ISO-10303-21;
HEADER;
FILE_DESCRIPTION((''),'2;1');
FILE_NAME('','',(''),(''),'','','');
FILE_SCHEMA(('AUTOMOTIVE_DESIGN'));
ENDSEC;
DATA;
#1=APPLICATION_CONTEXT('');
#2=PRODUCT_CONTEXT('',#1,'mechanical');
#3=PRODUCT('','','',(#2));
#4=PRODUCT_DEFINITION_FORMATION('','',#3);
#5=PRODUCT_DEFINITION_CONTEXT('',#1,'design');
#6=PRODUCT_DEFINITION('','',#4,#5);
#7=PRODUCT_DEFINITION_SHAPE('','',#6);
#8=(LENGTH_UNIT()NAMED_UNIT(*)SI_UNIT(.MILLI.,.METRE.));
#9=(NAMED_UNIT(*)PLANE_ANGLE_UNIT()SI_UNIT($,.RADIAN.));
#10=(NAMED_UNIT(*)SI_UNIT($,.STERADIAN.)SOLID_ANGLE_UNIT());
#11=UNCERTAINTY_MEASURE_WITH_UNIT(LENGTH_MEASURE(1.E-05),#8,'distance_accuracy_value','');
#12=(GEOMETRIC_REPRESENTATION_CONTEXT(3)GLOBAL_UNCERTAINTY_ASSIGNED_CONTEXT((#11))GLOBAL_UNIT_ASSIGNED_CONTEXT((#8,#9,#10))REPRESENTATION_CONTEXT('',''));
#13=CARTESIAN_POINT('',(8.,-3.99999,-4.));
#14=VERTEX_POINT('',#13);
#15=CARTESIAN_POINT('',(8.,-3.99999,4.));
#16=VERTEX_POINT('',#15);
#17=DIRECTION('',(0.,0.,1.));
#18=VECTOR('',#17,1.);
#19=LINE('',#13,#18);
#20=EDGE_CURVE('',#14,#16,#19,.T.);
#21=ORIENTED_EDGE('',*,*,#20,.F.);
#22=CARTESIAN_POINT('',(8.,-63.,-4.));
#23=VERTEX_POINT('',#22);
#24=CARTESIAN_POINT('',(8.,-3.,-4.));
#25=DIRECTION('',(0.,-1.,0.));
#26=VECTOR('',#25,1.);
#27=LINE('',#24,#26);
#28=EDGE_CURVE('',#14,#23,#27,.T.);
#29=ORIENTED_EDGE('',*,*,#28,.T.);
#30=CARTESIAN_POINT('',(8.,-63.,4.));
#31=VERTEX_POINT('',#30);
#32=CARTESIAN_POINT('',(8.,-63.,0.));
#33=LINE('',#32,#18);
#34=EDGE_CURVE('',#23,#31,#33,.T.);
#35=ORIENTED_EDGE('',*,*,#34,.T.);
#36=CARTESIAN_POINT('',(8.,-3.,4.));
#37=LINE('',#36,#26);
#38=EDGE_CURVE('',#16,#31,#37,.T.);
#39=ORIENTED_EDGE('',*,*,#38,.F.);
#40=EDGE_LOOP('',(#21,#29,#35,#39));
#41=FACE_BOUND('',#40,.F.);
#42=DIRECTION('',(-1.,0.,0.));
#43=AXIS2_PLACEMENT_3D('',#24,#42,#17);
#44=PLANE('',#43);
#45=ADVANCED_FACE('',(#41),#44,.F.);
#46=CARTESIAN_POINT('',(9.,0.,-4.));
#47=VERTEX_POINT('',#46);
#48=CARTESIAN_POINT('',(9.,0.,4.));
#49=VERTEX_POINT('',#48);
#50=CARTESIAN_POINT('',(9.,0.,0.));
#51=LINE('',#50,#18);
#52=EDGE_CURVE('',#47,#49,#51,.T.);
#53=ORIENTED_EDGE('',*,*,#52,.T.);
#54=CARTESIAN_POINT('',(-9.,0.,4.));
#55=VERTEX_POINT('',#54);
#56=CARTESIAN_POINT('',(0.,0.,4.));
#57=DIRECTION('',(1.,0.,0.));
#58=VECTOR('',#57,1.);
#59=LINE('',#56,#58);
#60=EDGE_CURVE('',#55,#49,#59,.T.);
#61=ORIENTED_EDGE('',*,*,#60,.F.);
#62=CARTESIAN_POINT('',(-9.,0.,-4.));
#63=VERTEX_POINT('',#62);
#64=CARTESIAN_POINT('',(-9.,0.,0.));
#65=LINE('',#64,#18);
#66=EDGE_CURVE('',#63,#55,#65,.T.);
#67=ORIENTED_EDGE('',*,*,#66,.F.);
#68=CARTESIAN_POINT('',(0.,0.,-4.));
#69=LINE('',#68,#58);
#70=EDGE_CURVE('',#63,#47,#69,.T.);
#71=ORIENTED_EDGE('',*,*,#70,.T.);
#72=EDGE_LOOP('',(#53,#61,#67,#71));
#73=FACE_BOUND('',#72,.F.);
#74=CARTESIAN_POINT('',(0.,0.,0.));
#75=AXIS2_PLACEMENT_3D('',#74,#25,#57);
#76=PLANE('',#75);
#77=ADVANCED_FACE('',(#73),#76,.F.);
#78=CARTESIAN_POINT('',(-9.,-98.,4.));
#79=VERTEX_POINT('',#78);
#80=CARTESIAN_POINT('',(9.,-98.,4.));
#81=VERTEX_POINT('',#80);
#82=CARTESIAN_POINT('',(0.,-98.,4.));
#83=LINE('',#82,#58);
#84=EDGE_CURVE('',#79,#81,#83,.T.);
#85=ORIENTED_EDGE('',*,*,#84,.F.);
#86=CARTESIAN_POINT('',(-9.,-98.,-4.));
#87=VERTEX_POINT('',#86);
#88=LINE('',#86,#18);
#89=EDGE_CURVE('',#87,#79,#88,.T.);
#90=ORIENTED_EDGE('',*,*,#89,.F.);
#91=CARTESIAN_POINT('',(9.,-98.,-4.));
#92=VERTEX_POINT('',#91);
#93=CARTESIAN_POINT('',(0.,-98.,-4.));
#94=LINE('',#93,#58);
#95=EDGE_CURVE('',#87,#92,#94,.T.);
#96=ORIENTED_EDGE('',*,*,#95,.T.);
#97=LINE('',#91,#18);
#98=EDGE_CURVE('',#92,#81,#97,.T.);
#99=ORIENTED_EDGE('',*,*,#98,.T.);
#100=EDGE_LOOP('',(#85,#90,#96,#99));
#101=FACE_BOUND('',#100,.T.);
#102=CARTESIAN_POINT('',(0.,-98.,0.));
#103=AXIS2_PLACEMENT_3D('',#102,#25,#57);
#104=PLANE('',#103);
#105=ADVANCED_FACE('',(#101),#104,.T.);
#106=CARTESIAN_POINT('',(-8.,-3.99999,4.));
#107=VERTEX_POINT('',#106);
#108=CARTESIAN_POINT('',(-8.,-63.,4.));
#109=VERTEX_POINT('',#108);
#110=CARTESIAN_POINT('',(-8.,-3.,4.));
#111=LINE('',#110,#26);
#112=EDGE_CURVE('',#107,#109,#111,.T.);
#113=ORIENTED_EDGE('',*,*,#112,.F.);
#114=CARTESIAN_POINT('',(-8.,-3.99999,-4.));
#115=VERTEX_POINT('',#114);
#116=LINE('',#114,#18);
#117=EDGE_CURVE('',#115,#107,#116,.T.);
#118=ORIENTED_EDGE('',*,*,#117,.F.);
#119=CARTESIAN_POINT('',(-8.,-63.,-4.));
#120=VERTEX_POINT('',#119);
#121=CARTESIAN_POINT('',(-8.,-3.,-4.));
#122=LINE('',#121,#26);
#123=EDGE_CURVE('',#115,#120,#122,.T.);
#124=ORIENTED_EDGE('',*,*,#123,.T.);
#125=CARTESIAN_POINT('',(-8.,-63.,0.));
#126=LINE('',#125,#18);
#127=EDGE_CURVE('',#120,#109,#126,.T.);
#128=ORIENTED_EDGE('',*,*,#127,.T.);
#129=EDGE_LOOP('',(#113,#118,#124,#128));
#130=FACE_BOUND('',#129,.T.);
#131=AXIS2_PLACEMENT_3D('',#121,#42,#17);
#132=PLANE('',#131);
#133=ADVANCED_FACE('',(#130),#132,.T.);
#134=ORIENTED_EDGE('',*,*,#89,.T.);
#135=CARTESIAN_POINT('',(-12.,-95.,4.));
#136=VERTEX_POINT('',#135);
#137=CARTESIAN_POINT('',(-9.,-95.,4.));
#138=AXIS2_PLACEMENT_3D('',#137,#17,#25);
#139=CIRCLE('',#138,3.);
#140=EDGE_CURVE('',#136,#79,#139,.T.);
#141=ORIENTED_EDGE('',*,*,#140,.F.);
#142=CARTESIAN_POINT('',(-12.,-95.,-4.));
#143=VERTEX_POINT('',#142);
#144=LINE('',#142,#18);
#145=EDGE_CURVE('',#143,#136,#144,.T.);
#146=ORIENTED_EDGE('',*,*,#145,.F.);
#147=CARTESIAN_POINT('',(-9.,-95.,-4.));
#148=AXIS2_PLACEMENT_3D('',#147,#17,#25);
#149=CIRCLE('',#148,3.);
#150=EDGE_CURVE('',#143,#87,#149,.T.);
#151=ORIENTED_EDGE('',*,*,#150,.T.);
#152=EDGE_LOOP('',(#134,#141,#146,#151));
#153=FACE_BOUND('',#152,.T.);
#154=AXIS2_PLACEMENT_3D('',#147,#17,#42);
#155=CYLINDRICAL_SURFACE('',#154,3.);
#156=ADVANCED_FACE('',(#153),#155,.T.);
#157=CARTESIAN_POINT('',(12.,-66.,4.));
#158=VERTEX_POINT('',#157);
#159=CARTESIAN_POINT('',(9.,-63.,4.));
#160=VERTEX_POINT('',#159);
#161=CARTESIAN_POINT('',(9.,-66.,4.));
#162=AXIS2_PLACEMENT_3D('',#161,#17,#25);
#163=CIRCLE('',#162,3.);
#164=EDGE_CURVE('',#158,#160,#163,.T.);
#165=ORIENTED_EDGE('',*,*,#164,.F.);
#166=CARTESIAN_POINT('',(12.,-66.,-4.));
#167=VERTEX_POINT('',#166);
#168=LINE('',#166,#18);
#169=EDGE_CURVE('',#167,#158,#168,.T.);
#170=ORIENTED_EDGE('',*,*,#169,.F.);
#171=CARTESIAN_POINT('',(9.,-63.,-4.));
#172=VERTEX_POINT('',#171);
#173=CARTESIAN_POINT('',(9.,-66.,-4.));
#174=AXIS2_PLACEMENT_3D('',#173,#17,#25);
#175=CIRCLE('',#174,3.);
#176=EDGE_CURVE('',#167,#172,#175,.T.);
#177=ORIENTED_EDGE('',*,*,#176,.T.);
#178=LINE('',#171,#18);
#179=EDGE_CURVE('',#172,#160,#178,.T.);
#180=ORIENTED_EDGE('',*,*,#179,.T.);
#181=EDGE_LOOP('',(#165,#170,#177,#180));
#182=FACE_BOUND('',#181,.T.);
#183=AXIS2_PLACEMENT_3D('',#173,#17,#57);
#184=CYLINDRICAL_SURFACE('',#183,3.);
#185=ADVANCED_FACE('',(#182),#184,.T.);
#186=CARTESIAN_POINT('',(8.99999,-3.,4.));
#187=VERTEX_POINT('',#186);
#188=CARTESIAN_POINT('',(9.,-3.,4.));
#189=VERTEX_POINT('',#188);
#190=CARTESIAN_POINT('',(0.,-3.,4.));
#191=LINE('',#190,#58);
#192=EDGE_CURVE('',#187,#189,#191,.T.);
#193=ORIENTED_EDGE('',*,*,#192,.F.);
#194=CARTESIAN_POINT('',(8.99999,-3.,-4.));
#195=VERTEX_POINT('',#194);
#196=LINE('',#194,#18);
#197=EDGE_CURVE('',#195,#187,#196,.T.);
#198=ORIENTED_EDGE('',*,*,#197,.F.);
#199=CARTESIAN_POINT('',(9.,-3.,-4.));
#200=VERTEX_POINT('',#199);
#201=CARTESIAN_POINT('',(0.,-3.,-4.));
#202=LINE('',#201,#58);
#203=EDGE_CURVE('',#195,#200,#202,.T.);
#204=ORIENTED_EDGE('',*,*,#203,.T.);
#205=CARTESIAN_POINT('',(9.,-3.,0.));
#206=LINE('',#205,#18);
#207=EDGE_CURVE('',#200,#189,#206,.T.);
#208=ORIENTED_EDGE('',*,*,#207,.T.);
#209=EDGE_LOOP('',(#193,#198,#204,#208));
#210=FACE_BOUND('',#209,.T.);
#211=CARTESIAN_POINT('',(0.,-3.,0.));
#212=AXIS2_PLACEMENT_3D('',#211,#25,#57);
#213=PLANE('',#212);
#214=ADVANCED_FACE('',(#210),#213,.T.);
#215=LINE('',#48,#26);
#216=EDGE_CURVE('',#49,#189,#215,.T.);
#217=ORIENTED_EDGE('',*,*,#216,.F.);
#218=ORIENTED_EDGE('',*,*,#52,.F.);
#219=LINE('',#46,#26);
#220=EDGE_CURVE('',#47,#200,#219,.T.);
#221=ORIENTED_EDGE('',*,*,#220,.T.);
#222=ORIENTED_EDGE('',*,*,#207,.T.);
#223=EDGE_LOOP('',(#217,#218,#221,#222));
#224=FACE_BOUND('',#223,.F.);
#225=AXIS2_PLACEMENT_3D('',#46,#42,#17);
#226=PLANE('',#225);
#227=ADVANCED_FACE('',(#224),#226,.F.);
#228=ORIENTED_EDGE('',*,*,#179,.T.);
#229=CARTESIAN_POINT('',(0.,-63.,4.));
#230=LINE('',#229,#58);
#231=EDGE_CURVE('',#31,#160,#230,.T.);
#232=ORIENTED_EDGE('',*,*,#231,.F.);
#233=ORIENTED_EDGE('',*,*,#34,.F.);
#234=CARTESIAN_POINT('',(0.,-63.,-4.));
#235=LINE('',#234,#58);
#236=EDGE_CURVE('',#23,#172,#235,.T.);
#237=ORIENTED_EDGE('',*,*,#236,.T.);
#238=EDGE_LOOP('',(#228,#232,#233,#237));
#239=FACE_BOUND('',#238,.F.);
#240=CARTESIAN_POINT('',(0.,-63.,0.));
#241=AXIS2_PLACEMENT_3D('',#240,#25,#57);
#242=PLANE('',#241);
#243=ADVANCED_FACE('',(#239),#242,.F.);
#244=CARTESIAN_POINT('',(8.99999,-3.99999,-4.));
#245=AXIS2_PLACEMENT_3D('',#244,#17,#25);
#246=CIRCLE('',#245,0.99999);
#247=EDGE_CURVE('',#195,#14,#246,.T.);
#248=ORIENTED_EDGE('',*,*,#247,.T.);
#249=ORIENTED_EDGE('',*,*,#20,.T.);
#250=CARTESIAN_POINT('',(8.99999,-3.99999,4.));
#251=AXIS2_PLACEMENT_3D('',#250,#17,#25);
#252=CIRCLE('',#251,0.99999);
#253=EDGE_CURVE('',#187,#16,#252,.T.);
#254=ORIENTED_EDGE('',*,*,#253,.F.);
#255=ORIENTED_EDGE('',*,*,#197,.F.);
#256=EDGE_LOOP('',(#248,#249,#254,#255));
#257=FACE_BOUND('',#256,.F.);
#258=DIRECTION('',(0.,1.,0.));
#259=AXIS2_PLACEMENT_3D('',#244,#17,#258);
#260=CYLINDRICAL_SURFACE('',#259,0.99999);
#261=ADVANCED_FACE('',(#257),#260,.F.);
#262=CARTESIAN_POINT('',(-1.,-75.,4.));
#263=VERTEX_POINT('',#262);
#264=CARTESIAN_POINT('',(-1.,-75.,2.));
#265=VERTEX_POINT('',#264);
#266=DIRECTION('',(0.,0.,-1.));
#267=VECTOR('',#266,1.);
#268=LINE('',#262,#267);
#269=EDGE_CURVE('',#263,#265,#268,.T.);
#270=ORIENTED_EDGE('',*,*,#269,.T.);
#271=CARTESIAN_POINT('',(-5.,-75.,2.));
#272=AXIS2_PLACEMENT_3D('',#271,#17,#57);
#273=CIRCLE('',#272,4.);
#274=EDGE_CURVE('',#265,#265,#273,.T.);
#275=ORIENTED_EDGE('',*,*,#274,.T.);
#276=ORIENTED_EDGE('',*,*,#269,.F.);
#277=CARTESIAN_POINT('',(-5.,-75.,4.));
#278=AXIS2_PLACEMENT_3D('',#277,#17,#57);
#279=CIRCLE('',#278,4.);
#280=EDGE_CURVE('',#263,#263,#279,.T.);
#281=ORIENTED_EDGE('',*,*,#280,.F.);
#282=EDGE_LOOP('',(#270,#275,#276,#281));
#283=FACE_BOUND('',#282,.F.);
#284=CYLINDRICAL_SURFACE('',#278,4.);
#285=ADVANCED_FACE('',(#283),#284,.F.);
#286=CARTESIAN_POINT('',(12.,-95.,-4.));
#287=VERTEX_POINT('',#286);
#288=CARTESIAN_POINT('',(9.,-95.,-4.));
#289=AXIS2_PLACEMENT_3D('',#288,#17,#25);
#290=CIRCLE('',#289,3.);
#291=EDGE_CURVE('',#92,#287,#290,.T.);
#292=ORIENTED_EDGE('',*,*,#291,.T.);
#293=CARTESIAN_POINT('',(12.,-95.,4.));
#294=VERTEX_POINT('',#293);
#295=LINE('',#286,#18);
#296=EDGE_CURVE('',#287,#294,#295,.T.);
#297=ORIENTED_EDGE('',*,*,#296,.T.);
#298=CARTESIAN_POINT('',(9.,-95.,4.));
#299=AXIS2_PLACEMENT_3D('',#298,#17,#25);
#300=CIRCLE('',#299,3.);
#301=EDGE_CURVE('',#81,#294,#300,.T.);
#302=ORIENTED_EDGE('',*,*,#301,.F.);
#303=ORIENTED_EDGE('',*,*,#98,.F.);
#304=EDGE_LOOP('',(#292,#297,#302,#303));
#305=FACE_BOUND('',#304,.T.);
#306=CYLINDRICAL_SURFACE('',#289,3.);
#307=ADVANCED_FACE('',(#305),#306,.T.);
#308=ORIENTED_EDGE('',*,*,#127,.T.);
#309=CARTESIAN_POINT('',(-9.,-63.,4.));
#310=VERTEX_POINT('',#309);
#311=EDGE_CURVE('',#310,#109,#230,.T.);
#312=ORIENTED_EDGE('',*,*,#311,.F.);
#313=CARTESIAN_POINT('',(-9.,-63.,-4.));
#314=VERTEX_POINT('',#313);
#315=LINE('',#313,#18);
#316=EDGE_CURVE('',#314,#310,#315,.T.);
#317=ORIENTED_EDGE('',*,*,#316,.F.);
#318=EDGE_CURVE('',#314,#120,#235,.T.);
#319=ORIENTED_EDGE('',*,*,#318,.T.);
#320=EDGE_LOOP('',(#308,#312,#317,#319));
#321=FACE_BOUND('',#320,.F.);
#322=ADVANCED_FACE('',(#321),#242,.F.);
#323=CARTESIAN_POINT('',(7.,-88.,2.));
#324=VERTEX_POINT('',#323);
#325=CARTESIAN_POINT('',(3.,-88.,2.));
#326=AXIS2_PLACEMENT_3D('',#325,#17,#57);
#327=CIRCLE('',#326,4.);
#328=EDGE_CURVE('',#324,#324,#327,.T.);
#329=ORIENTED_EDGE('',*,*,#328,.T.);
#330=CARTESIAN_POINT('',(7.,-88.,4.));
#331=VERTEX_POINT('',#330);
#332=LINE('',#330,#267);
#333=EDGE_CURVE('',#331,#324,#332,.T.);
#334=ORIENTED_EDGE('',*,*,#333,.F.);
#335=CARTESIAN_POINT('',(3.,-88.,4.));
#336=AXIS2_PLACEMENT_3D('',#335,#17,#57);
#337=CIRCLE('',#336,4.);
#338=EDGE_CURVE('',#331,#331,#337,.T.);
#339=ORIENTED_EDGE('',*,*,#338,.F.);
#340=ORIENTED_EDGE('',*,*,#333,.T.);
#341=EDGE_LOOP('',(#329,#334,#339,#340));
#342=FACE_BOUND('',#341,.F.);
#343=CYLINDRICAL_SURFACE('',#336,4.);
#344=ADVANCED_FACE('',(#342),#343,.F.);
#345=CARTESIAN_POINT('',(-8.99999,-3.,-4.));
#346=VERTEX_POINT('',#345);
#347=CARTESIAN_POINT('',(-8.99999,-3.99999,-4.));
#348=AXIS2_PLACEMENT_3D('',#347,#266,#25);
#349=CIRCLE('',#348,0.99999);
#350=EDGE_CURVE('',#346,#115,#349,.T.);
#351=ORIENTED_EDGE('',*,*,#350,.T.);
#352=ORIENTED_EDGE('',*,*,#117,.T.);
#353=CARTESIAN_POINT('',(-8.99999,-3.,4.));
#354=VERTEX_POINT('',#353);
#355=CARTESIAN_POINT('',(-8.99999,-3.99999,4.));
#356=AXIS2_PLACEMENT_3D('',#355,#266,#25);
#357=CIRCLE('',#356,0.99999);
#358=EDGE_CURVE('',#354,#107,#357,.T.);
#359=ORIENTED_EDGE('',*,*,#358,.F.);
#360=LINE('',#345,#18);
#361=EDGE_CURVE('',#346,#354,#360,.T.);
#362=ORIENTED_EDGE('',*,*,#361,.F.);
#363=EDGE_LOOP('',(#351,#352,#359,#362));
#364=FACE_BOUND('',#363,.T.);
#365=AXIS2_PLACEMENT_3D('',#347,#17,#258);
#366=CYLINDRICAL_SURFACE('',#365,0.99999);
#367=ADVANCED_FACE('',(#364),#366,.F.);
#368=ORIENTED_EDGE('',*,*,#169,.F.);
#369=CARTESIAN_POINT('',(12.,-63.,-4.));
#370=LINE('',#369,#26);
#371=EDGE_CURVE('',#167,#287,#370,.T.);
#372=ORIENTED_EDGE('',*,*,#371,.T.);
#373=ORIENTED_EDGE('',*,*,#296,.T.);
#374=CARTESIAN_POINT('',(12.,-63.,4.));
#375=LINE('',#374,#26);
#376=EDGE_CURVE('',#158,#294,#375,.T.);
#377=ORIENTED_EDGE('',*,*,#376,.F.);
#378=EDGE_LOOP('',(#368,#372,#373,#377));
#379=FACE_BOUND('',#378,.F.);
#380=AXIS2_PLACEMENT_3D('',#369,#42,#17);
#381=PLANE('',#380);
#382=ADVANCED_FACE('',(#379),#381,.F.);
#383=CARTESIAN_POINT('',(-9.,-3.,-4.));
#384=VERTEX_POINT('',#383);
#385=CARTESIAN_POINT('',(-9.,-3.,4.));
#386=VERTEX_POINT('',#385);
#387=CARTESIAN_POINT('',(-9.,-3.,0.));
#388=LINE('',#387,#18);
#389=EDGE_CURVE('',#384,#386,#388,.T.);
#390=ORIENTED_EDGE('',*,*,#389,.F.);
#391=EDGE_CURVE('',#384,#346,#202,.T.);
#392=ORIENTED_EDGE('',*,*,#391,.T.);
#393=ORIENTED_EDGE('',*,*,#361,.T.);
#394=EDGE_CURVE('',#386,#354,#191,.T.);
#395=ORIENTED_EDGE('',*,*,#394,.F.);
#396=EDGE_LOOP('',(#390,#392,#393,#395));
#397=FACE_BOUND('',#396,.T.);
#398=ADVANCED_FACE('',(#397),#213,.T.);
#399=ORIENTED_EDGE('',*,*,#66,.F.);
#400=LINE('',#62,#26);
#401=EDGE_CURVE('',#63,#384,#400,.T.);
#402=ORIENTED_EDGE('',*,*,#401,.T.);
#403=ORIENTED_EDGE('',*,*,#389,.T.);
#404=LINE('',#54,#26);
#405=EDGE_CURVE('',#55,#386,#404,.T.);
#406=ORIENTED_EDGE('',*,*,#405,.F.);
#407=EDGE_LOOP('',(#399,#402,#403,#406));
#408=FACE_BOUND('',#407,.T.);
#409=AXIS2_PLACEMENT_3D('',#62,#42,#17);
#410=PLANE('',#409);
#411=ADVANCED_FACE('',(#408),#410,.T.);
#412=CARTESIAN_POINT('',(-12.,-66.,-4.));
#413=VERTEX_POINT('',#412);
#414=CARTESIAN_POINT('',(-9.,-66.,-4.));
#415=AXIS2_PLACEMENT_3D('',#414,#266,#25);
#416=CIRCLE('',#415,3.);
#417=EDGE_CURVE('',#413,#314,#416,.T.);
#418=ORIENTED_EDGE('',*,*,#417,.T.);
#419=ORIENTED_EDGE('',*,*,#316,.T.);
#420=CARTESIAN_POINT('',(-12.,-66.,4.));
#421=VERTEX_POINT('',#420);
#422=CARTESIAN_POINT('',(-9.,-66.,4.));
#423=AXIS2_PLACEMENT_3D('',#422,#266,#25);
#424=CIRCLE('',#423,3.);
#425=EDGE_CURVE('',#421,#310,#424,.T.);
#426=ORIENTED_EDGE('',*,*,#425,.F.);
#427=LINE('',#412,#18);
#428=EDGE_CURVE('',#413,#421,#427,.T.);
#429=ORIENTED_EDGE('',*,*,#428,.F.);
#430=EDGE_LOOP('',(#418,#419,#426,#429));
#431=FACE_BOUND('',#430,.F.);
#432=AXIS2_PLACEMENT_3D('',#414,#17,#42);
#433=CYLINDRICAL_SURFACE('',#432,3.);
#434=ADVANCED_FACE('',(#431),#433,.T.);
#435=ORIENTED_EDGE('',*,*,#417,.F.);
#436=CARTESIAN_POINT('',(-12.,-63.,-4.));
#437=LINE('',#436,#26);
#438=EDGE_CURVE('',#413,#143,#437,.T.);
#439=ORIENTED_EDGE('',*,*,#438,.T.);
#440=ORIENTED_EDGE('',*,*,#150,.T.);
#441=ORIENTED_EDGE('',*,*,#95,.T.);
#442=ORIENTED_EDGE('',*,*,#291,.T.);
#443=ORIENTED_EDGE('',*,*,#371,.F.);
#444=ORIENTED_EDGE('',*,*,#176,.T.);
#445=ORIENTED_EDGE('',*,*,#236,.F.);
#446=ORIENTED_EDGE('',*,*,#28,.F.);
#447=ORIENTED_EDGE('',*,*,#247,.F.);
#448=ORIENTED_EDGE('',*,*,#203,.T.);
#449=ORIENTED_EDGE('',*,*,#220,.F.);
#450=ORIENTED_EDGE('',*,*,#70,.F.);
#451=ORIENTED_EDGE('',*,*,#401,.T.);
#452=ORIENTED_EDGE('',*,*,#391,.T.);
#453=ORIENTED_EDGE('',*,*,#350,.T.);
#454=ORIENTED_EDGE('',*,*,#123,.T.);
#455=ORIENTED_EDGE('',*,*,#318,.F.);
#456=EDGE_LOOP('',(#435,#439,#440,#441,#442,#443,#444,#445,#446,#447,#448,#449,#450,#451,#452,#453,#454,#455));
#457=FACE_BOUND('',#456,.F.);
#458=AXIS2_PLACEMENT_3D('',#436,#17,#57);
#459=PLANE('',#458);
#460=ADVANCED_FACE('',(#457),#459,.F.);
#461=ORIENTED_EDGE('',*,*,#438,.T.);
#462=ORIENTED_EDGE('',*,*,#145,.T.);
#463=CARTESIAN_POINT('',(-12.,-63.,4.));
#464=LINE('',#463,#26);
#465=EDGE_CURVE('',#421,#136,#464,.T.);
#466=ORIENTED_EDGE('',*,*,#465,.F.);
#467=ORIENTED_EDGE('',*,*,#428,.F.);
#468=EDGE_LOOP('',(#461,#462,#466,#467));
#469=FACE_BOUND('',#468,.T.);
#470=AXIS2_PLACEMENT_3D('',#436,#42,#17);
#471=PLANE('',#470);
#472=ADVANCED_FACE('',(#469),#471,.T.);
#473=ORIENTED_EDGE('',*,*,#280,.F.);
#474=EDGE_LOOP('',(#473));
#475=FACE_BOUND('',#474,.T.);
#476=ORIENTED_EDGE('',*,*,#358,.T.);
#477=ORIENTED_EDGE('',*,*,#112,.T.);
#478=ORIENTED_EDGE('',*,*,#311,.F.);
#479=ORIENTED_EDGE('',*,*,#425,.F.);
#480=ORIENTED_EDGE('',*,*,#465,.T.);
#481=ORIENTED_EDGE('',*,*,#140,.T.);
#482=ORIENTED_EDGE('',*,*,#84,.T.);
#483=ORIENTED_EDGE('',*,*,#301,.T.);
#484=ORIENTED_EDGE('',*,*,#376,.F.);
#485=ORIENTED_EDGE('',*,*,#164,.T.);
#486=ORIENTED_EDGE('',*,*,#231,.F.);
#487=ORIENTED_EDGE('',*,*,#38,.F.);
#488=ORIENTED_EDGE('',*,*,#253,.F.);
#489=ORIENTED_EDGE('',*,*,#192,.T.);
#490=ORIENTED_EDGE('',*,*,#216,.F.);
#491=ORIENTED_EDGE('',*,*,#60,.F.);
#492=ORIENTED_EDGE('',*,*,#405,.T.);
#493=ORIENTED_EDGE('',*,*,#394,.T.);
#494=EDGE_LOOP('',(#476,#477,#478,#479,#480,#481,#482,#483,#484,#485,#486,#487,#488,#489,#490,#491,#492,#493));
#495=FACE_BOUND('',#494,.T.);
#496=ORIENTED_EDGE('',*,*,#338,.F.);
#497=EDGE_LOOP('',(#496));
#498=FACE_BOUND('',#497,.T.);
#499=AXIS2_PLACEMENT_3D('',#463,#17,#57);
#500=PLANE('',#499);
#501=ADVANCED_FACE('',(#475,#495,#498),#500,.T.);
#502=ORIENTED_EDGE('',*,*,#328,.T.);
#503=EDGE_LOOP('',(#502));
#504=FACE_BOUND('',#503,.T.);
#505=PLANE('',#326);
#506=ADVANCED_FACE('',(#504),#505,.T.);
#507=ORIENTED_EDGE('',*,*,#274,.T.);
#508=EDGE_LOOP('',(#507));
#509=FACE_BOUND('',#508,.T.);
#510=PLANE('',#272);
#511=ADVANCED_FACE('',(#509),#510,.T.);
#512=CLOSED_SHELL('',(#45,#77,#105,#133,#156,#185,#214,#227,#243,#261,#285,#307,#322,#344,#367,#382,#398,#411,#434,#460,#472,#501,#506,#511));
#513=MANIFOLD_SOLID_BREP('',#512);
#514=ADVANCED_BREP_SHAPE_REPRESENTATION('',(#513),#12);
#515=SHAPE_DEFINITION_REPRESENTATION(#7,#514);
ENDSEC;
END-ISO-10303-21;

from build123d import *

# Parameters (mm, degrees)
F0_W     = 18
F0_H     = 8
F1_DEPTH = 3
F2_W     = 16
F2_H     = 8
F3_DEPTH = 60
F4_R     = 0.99999
F5_W     = 24
F5_H     = 8
F6_DEPTH = 35
F7_R     = 3
F8_R     = 4
F9_DEPTH = 2


# Not quite as in the source:
# - a fillet or chamfer is up to 0.001 mm smaller than in the source, because OpenCascade refuses the exact size


with BuildPart() as f1:
    # F0 (on Front) → F1 (new body)
    with BuildSketch(Plane.XZ):
        Rectangle(F0_W, F0_H)
    extrude(amount=F1_DEPTH)

    # F2 (on face) → F3 (join)
    with BuildSketch(Plane.XZ.offset(3)):
        Rectangle(F2_W, F2_H)
    extrude(amount=F3_DEPTH)

    # F4 (radius 1 in the source; OpenCascade refuses exactly that, so slightly less here)
    f4_edges = [f1.edges().sort_by_distance(p)[0] for p in [
        (-8, -3, 0),
        (8, -3, 0),
    ]]
    fillet(f4_edges, radius=F4_R)

    # F5 (on face) → F6 (join)
    with BuildSketch(Plane.XZ.offset(63)):
        Rectangle(F5_W, F5_H)
    extrude(amount=F6_DEPTH)

    # F7
    f7_edges = [f1.edges().sort_by_distance(p)[0] for p in [
        (-12, -63, 0),
        (-12, -98, 0),
        (12, -98, 0),
        (12, -63, 0),
    ]]
    fillet(f7_edges, radius=F7_R)

    # F8 (on face) → F9 (cut)
    with BuildSketch(Plane.XY.offset(4)):
        with Locations((-5, -75)):
            Circle(F8_R)
        with Locations((3, -88)):
            Circle(F8_R)
    extrude(amount=-F9_DEPTH, mode=Mode.SUBTRACT)


solid = f1.part
